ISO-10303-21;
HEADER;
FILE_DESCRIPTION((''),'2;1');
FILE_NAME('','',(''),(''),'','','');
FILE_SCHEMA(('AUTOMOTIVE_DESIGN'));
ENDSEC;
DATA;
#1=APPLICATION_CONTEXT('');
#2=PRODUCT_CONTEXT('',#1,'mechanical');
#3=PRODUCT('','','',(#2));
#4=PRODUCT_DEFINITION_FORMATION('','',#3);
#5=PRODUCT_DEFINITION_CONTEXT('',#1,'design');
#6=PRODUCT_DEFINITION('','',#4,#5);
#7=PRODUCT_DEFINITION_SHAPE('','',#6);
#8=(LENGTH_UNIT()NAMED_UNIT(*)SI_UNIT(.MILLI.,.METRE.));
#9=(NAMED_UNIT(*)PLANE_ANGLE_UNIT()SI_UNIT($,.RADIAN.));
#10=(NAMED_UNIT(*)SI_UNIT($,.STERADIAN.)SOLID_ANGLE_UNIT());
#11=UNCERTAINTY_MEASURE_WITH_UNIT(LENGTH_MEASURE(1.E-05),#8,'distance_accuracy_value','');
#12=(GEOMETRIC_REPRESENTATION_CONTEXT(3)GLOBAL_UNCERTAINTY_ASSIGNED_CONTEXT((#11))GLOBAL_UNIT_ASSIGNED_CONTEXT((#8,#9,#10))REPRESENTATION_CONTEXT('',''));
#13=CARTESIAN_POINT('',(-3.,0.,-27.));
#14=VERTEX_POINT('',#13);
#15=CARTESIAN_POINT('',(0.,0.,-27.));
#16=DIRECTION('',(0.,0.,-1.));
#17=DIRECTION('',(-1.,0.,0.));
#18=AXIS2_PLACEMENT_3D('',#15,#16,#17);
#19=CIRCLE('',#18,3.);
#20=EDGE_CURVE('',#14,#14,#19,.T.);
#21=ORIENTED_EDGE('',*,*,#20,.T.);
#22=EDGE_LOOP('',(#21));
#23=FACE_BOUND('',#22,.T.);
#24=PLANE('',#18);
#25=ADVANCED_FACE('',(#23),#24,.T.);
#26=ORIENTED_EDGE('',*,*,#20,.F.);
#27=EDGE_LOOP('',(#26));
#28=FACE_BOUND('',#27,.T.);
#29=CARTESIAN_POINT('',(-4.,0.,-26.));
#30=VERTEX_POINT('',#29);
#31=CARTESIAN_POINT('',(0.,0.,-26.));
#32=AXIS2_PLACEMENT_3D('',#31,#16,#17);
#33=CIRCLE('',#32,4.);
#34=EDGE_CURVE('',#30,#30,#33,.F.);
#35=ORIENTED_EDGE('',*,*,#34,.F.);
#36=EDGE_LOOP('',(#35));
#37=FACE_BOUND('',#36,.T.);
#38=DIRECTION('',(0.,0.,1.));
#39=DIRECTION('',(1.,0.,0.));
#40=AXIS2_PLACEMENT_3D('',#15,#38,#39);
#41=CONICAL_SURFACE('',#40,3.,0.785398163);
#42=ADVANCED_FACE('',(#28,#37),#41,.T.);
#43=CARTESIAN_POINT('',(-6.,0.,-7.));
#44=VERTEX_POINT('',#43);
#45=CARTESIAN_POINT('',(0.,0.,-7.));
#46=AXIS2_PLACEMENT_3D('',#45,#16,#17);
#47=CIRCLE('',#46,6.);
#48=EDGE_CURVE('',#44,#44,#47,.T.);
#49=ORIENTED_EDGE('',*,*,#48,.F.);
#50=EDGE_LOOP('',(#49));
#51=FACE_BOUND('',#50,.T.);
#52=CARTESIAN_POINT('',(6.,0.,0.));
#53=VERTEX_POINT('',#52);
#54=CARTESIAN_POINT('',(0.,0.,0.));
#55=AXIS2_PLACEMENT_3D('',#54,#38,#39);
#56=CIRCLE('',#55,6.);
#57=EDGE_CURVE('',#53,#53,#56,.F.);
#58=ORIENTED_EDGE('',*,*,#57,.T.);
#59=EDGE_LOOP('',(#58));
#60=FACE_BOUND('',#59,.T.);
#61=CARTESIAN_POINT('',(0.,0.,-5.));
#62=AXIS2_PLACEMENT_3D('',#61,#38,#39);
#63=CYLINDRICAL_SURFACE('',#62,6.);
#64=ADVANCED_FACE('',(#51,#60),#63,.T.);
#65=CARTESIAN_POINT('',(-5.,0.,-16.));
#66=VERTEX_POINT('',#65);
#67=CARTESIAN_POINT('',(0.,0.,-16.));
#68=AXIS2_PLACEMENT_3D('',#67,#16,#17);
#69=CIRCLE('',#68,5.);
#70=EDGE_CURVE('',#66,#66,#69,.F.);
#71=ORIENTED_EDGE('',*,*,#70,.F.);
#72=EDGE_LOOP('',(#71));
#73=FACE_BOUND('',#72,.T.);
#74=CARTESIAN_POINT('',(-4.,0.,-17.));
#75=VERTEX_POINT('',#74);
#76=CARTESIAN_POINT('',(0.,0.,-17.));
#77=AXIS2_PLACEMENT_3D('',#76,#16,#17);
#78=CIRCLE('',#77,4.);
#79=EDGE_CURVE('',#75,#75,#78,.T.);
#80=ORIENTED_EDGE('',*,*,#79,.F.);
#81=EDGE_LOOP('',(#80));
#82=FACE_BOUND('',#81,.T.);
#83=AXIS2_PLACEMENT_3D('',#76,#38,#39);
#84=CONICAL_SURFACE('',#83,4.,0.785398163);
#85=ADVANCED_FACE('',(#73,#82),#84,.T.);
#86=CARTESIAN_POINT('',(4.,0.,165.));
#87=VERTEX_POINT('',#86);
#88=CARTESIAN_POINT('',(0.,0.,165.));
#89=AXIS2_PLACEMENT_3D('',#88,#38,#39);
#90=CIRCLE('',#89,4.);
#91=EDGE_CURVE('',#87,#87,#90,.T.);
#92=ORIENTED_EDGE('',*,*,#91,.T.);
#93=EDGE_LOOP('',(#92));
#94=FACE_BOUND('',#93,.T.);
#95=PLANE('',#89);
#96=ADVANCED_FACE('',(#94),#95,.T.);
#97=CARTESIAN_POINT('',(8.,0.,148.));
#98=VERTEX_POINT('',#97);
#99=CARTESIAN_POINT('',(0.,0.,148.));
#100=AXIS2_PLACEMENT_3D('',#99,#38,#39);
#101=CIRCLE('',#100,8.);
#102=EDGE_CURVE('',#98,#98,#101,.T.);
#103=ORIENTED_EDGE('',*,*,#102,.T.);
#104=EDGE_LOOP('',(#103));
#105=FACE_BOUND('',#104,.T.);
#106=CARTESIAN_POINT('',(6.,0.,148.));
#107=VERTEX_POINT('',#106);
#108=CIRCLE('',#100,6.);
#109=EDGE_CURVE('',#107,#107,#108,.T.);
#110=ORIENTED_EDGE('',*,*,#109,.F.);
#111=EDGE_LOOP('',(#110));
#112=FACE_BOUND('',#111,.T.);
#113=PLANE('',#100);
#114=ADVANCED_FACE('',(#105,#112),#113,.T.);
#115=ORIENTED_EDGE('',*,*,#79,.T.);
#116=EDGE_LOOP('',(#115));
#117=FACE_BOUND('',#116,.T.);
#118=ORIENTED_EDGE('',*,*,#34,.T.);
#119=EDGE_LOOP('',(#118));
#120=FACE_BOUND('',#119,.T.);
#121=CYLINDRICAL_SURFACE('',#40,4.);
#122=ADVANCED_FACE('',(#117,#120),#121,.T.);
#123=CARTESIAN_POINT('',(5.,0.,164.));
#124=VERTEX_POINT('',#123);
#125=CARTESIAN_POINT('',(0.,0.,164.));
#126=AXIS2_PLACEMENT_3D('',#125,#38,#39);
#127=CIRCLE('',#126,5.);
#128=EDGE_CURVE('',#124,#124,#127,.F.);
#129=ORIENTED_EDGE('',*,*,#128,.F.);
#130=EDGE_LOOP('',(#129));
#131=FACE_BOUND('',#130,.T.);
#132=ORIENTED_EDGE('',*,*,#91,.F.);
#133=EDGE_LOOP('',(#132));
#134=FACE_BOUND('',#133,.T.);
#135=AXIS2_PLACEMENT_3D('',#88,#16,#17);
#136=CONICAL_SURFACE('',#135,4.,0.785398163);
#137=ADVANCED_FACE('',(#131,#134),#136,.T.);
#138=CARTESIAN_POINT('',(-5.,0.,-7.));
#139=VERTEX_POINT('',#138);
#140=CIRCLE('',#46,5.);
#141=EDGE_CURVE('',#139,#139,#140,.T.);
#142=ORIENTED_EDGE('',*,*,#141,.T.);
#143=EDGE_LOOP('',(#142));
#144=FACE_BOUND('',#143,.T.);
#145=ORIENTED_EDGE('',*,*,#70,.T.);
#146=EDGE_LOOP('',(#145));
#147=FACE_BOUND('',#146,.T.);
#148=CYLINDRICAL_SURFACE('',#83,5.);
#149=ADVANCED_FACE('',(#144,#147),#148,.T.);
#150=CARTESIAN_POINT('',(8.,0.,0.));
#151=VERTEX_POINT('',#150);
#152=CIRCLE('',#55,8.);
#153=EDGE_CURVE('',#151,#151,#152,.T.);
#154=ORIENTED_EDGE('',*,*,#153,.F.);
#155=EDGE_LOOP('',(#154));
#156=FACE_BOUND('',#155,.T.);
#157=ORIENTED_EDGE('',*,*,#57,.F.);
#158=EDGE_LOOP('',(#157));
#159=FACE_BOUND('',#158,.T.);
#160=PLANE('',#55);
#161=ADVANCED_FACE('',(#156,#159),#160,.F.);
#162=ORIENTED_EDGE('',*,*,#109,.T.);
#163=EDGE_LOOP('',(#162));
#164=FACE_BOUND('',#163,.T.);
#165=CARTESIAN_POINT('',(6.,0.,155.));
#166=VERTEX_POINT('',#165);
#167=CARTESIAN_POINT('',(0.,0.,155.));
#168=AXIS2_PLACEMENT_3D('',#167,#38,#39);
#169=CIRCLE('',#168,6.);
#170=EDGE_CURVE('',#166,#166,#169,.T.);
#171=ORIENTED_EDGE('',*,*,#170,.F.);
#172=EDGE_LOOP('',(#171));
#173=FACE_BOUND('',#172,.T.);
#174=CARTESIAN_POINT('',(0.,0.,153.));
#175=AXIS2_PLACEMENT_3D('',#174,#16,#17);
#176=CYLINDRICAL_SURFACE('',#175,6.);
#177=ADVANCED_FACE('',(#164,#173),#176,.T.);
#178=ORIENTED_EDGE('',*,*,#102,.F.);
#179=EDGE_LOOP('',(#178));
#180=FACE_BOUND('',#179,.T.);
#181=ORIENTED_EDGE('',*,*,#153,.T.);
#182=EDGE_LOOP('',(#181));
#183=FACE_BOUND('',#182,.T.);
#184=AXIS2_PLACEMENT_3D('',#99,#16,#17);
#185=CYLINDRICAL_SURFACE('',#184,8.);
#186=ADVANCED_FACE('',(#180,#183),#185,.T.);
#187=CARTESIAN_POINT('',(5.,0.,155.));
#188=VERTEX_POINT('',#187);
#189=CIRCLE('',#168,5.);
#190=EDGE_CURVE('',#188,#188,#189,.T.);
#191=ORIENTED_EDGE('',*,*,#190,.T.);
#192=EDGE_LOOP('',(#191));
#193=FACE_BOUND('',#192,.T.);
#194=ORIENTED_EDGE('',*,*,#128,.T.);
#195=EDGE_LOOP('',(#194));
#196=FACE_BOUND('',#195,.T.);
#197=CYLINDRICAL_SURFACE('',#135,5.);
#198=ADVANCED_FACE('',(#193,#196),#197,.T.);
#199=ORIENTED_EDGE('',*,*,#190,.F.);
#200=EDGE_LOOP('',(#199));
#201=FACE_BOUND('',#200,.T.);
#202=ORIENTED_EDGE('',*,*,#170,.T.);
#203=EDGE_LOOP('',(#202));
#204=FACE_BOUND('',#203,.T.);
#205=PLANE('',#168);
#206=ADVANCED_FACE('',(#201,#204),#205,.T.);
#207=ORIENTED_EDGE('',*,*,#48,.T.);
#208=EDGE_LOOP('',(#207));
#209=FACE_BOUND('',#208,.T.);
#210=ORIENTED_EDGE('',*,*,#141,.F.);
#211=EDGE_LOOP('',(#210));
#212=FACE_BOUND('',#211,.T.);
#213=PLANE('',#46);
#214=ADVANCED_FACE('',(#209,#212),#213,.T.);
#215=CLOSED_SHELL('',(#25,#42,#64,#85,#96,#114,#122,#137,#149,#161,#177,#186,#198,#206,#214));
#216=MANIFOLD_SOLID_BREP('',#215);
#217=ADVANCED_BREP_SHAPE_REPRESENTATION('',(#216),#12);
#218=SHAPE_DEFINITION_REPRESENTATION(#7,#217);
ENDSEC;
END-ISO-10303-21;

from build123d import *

# Parameters (mm, degrees)
SKETCH1_R           = 8
BOSS_EXTRUDE1_DEPTH = 148
SKETCH6_R           = 6
BOSS_EXTRUDE2_DEPTH = 5
SKETCH7_R           = 6
BOSS_EXTRUDE3_DEPTH = 2
SKETCH8_R           = 5
BOSS_EXTRUDE4_DEPTH = 10
SKETCH9_R           = 4
BOSS_EXTRUDE5_DEPTH = 10
CHAMFER1_SIZE       = 1
CHAMFER2_SIZE       = 1
BOSS_EXTRUDE6_START = 5
SKETCH10_R          = 6
BOSS_EXTRUDE6_DEPTH = 5
BOSS_EXTRUDE7_START = 2
SKETCH11_R          = 6
BOSS_EXTRUDE7_DEPTH = 2
BOSS_EXTRUDE8_START = 10
SKETCH12_R          = 5
BOSS_EXTRUDE8_DEPTH = 10
CHAMFER3_SIZE       = 1


with BuildPart() as part:
    # Sketch1 → Boss-Extrude1 (new body)
    with BuildSketch(Plane.XY):
        Circle(SKETCH1_R)
    extrude(amount=BOSS_EXTRUDE1_DEPTH)

    # Sketch6 → Boss-Extrude2 (add)
    with BuildSketch(Plane(origin=(0, 0, 0), x_dir=(-1, 0, 0), z_dir=(0, 0, -1))):
        with Locations(Location((0, 0, 0), (0, 0, 180))):
            Circle(SKETCH6_R)
    extrude(amount=BOSS_EXTRUDE2_DEPTH)

    # Sketch7 → Boss-Extrude3 (add)
    with BuildSketch(Plane(origin=(0, 0, -5), x_dir=(-1, 0, 0), z_dir=(0, 0, -1))):
        with Locations(Location((0, 0, 0), (0, 0, 180))):
            Circle(SKETCH7_R)
    extrude(amount=BOSS_EXTRUDE3_DEPTH)

    # Sketch8 → Boss-Extrude4 (add)
    with BuildSketch(Plane(origin=(0, 0, -7), x_dir=(-1, 0, 0), z_dir=(0, 0, -1))):
        Circle(SKETCH8_R)
    extrude(amount=BOSS_EXTRUDE4_DEPTH)

    # Sketch9 → Boss-Extrude5 (add)
    with BuildSketch(Plane(origin=(0, 0, -17), x_dir=(-1, 0, 0), z_dir=(0, 0, -1))):
        Circle(SKETCH9_R)
    extrude(amount=BOSS_EXTRUDE5_DEPTH)

    # Chamfer1
    chamfer1_edges = [part.edges().sort_by_distance(p)[0] for p in [
        (5, 0, -17),
    ]]
    chamfer(chamfer1_edges, length=CHAMFER1_SIZE - 0.0001)  # a hair under: the kernel refuses the full size

    # Chamfer2
    chamfer2_edges = [part.edges().sort_by_distance(p)[0] for p in [
        (4, 0, -27),
    ]]
    chamfer(chamfer2_edges, length=CHAMFER2_SIZE)

    # Sketch10 → Boss-Extrude6 (add)
    with BuildSketch(Plane.XY.offset(148).offset(BOSS_EXTRUDE6_START)):
        Circle(SKETCH10_R)
    extrude(amount=-BOSS_EXTRUDE6_DEPTH)

    # Sketch11 → Boss-Extrude7 (add)
    with BuildSketch(Plane.XY.offset(153).offset(BOSS_EXTRUDE7_START)):
        Circle(SKETCH11_R)
    extrude(amount=-BOSS_EXTRUDE7_DEPTH)

    # Sketch12 → Boss-Extrude8 (add)
    with BuildSketch(Plane.XY.offset(155).offset(BOSS_EXTRUDE8_START)):
        with Locations(Location((0, 0, 0), (0, 0, 180))):
            Circle(SKETCH12_R)
    extrude(amount=-BOSS_EXTRUDE8_DEPTH)

    # Chamfer3
    chamfer3_edges = [part.edges().sort_by_distance(p)[0] for p in [
        (5, 0, 165),
    ]]
    chamfer(chamfer3_edges, length=CHAMFER3_SIZE)


solid = part.part
